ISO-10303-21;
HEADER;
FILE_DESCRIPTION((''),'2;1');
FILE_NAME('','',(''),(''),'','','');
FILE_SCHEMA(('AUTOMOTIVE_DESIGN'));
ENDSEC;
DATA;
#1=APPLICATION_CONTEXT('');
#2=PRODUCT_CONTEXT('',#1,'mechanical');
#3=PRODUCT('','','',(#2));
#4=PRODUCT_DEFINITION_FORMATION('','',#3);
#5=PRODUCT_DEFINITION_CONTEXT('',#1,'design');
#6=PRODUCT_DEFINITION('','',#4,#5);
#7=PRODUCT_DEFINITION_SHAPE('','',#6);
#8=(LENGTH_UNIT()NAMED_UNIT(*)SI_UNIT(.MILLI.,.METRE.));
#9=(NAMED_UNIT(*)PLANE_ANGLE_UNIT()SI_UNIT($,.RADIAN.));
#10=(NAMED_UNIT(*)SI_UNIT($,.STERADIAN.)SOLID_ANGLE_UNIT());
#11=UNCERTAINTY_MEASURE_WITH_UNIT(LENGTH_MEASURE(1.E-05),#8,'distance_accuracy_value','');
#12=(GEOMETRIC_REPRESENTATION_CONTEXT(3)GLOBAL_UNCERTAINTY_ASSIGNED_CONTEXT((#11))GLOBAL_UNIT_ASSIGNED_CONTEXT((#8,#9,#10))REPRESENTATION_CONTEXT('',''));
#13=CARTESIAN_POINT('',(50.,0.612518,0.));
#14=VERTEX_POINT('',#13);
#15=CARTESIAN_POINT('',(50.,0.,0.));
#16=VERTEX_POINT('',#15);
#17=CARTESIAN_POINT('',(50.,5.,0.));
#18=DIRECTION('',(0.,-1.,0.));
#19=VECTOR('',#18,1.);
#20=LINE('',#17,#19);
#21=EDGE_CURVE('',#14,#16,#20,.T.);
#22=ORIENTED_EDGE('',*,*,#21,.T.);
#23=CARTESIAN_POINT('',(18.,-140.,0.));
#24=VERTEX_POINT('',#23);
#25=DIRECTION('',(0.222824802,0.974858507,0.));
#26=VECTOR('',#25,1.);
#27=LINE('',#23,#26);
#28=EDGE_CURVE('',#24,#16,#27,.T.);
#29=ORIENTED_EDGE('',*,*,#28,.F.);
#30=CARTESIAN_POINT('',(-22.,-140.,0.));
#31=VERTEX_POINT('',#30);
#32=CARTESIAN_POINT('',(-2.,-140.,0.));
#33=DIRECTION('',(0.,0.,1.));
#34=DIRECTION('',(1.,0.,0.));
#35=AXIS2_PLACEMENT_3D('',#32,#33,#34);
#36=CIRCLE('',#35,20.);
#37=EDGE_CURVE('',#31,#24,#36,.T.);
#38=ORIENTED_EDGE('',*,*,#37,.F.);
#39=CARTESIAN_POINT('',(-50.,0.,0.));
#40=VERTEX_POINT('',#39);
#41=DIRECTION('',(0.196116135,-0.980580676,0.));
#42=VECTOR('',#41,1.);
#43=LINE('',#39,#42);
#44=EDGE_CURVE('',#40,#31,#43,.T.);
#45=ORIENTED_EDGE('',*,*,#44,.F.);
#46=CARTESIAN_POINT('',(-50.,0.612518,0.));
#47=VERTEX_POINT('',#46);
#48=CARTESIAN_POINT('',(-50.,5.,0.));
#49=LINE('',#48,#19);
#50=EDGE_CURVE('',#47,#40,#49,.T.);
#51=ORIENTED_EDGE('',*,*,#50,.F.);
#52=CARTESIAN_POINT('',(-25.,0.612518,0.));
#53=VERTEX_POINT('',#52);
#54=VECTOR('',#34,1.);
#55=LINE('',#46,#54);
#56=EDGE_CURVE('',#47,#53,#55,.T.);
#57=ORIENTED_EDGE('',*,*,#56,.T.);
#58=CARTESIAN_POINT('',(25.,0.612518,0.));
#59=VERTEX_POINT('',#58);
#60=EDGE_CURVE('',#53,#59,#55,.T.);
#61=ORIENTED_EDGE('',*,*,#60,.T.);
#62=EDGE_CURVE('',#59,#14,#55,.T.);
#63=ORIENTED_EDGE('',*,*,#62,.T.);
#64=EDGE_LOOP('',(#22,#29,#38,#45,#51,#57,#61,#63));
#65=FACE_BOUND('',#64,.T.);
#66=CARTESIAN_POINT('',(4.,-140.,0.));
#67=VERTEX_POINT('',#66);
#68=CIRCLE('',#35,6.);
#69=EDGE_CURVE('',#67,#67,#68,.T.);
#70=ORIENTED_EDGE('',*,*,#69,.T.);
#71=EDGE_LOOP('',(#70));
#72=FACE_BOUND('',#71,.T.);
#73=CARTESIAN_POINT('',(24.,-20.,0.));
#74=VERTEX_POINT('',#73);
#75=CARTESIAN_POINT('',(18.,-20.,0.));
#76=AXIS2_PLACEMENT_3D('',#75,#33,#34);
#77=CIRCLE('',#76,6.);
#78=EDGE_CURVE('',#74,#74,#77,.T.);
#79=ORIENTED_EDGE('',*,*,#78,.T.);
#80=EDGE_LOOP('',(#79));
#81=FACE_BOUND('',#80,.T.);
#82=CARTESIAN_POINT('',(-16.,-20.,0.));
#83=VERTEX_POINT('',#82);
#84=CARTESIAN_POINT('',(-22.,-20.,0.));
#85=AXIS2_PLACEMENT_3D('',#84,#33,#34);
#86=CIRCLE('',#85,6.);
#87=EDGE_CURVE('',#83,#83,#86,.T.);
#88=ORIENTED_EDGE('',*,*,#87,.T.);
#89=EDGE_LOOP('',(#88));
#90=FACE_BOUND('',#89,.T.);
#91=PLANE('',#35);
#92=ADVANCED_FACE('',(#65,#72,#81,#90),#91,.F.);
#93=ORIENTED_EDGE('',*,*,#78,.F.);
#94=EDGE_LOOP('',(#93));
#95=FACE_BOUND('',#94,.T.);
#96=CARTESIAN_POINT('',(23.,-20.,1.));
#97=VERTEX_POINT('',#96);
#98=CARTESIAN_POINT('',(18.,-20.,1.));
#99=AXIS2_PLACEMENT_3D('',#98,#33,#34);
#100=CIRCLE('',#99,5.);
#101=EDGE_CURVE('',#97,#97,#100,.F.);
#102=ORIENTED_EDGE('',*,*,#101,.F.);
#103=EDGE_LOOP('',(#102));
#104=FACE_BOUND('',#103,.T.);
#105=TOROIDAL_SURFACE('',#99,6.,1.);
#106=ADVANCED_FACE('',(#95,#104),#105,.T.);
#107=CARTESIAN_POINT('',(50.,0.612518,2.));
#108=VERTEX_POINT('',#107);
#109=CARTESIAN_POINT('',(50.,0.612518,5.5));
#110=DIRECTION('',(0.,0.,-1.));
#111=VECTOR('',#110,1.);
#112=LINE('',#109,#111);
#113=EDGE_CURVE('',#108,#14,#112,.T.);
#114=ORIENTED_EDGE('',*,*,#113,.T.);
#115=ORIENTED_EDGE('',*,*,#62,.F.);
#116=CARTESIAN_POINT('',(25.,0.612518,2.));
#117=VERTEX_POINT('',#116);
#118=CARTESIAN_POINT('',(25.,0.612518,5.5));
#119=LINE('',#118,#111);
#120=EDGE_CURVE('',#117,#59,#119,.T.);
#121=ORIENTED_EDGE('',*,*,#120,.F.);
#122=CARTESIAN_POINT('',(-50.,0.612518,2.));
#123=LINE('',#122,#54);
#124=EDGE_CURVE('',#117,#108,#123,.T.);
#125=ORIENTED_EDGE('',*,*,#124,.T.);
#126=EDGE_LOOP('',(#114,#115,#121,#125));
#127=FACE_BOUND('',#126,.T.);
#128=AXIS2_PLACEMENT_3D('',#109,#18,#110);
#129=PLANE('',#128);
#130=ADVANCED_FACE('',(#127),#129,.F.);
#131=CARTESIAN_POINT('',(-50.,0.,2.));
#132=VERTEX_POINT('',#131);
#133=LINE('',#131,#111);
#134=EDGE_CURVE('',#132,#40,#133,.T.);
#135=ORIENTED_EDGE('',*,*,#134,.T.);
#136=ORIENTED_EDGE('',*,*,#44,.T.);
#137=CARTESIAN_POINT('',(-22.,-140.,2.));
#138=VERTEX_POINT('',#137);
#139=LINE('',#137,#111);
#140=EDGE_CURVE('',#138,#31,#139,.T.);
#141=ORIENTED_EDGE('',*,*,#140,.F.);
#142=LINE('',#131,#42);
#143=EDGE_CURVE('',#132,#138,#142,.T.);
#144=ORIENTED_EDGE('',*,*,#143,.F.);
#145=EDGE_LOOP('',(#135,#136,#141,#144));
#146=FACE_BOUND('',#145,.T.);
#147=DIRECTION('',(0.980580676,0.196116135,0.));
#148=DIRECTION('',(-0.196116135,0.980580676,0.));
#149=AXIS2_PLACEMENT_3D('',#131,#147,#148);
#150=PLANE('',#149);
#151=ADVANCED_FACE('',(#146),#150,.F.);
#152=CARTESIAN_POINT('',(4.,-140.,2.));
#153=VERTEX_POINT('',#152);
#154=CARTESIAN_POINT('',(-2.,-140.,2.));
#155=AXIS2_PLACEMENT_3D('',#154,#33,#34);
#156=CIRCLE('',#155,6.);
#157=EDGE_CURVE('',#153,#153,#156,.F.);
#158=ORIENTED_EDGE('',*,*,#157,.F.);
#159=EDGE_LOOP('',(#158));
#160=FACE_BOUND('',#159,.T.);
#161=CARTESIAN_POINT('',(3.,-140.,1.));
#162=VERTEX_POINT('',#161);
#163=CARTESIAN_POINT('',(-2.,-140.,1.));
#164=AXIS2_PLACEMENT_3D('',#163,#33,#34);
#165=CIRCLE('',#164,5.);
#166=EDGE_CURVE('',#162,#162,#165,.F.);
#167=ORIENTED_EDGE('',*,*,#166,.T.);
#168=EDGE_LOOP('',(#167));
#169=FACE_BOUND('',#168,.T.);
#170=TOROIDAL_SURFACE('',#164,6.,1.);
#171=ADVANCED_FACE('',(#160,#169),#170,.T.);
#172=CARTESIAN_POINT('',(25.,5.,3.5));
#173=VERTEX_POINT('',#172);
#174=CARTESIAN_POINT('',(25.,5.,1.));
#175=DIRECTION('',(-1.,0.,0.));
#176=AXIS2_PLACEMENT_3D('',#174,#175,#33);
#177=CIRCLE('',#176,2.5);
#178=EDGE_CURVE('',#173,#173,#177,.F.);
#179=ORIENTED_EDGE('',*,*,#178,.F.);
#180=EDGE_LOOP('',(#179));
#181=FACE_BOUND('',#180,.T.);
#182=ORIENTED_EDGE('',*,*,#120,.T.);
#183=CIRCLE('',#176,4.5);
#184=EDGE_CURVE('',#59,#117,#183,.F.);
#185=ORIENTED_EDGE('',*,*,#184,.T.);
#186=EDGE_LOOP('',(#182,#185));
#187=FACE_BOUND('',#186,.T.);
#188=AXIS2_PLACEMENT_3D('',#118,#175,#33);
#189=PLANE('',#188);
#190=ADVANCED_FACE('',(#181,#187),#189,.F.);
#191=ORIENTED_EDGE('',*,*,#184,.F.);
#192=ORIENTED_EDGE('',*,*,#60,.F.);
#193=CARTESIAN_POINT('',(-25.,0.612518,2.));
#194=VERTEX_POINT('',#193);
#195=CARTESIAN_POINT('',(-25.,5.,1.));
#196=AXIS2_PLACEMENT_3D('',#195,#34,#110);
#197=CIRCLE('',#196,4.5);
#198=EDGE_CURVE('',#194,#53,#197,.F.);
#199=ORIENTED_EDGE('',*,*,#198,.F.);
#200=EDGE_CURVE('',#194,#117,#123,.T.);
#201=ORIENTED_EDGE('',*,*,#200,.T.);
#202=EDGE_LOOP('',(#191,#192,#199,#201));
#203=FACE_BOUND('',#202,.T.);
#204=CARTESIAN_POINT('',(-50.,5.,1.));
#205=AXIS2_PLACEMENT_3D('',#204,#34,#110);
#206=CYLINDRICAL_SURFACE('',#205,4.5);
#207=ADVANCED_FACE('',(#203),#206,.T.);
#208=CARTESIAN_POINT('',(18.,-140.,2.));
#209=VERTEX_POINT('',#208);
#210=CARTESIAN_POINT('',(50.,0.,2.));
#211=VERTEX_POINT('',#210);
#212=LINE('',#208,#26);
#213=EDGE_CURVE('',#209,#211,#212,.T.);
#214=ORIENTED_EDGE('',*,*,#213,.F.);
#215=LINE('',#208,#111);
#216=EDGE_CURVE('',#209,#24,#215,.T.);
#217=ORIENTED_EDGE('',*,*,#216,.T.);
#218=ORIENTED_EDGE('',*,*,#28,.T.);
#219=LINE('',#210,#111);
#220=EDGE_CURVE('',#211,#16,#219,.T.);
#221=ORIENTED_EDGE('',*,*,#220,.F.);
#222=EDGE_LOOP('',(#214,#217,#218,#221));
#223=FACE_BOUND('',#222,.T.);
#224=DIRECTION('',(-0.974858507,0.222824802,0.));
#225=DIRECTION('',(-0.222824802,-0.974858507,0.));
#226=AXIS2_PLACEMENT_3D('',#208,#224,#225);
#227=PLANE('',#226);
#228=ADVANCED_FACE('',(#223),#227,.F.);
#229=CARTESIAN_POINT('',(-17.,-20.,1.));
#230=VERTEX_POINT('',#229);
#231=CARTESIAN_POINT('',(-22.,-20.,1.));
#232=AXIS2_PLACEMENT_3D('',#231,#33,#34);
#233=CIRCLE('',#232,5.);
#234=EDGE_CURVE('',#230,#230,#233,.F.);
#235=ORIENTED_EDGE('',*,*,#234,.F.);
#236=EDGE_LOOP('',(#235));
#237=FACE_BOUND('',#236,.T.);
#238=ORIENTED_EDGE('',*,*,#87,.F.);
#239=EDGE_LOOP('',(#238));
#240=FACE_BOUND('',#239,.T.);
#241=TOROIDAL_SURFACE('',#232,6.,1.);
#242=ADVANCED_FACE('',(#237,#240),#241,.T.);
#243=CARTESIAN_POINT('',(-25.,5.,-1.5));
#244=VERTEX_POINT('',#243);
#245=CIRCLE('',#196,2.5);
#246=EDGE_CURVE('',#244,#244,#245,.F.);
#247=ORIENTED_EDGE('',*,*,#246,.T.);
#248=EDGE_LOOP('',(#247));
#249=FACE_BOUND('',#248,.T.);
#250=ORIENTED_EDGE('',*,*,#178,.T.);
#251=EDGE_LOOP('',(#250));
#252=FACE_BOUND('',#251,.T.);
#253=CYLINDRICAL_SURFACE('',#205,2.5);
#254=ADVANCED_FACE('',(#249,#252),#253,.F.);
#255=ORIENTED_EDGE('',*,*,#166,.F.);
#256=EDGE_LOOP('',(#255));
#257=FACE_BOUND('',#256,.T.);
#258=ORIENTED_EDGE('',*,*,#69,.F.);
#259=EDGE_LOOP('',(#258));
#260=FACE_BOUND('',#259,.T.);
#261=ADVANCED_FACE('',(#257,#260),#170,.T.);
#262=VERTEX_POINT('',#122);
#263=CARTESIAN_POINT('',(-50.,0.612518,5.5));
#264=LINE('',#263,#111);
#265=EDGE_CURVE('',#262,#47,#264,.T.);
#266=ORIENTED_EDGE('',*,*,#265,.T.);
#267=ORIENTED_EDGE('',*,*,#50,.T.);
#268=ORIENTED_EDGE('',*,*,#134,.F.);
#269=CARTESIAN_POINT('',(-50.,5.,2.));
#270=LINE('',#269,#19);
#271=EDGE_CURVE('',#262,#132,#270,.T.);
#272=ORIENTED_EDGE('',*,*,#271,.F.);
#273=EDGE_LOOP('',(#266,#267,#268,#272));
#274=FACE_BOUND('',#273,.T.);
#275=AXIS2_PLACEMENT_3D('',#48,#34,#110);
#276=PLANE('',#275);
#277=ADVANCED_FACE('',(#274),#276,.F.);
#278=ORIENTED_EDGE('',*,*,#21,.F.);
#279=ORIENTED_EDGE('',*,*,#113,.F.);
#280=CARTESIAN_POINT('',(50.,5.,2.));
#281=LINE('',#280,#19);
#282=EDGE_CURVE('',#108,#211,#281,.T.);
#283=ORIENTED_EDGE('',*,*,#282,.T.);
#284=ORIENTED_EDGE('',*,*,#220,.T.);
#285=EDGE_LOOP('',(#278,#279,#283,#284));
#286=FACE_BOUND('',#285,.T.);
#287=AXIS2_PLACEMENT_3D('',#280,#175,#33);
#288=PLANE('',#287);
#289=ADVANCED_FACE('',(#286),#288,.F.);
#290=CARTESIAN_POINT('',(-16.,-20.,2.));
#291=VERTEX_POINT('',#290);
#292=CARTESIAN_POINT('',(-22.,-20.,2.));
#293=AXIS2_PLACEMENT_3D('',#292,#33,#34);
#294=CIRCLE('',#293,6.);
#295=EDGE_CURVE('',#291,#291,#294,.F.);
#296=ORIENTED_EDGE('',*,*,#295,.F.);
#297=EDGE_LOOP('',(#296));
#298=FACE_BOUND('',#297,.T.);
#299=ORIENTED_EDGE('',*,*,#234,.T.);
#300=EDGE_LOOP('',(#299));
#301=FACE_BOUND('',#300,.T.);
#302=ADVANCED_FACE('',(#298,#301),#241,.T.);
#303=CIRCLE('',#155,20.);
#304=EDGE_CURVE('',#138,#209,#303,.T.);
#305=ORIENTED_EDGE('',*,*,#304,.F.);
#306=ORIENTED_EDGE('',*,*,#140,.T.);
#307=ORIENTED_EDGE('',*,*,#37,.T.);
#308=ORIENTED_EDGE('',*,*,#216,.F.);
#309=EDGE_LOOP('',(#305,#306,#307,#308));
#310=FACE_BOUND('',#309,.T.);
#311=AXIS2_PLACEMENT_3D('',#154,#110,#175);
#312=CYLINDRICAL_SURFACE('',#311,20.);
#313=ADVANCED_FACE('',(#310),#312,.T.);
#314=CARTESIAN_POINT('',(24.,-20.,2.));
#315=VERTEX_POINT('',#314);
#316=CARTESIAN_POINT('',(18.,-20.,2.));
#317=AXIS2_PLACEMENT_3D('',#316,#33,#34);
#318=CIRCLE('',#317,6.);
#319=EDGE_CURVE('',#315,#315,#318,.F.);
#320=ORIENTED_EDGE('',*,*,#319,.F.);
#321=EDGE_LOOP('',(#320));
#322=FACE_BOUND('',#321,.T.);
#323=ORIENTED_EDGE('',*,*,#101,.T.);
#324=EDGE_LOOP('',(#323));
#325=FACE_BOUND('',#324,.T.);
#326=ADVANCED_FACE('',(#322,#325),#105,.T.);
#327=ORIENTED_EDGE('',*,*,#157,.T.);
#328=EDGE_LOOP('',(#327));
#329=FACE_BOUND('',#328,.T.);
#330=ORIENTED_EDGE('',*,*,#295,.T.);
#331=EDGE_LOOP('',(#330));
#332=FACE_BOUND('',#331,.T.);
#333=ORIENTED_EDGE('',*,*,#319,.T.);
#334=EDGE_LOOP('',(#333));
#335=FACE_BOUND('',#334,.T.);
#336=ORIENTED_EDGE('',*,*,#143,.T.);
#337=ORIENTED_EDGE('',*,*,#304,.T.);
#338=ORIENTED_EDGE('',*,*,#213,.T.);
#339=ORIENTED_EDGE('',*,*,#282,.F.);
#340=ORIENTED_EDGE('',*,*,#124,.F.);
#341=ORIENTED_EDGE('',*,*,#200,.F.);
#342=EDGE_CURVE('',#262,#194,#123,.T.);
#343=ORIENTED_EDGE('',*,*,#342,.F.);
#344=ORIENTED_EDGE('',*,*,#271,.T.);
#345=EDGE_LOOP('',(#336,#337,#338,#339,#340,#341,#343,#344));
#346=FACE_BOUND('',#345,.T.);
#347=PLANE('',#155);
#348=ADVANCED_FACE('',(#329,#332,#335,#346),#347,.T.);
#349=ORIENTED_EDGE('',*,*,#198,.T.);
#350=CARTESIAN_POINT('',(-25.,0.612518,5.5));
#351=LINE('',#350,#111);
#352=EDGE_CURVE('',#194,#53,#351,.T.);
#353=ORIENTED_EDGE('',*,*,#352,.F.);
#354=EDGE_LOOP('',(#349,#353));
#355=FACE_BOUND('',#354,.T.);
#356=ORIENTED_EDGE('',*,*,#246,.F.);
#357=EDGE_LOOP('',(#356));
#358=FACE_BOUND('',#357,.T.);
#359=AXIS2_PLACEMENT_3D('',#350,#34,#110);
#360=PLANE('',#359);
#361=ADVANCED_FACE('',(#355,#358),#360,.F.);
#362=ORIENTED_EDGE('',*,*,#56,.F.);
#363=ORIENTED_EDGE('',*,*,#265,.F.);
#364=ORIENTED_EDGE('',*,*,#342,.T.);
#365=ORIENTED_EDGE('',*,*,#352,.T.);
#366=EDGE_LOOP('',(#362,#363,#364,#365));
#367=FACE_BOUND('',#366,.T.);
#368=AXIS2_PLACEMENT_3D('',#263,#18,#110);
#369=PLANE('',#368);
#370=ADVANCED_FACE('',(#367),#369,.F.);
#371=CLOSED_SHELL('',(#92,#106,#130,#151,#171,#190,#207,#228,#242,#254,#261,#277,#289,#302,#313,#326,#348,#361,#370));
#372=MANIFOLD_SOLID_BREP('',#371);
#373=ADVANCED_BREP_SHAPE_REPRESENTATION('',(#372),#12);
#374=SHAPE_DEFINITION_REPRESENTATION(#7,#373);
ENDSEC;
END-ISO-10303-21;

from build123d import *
from build123d.topology import SkipClean

# Parameters (mm, degrees)
ESBO_O1_R                  = 5
RESSALTO_EXTRUS_O1_DEPTH   = 2
FILETE1_R                  = 1
ESBO_O6_W                  = 100
ESBO_O6_H                  = 2
RESSALTO_EXTRUS_O2_DEPTH   = 5
RESSALTO_EXTRUS_O3_DEPTH   = 100
CORTE_EXTRUS_O1_DEPTH      = 189.759767959
CORTE_EXTRUS_O3_DEPTH      = 168.720750058
CORTE_EXTRUS_O3_DEPTH_BACK = 168.720750058
ESBO_O9_W                  = 25
ESBO_O9_H                  = 25


with BuildPart() as part:
    # Esboço1 → Ressalto-extrusão1 (new body)
    with BuildSketch(Plane.XY):
        with BuildLine():
            Line((-50, 0), (50, 0))
            Line((50, 0), (18, -140))
            ThreePointArc((18, -140), (-2, -160), (-22, -140))
            Line((-22, -140), (-50, 0))
        make_face()
        with Locations((-2, -140)):
            Circle(ESBO_O1_R, mode=Mode.SUBTRACT)
        with Locations((-22, -20)):
            Circle(ESBO_O1_R, mode=Mode.SUBTRACT)
        with Locations((18, -20)):
            Circle(ESBO_O1_R, mode=Mode.SUBTRACT)
    extrude(amount=RESSALTO_EXTRUS_O1_DEPTH)

    # Filete1
    filete1_edges = [part.edges().sort_by_distance(p)[0] for p in [
        (-27, -20, 0),
        (-27, -20, 2),
        (13, -20, 0),
        (13, -20, 2),
        (-7, -140, 0),
        (-7, -140, 2),
    ]]
    fillet(filete1_edges, radius=FILETE1_R - 0.0001)  # a hair under: the kernel refuses the full size

    # Esboço6 → Ressalto-extrusão2 (add)
    with BuildSketch(Plane(origin=(0, 0, 0), x_dir=(1, 0, 0), z_dir=(0, 1, 0))):
        with Locations((0, -1)):
            Rectangle(ESBO_O6_W, ESBO_O6_H)
    extrude(amount=RESSALTO_EXTRUS_O2_DEPTH)

    # Esboço7 → Ressalto-extrusão3 (add, through all)
    with BuildSketch(Plane(origin=(50, 0, 0), x_dir=(0, 0, -1), z_dir=(1, 0, 0))):
        with BuildLine():
            ThreePointArc((3.5, 5), (-3.80624304, 8.51781182), (-2, 0.612517806))
            Line((-2, 0.612517806), (-2, 2.708712153))
            ThreePointArc((-2, 2.708712153), (-2.369306394, 7.091650066), (1.5, 5))
            ThreePointArc((1.5, 5), (1.091650066, 3.630693606), (0, 2.708712153))
            Line((0, 2.708712153), (0, 0.612517806))
            ThreePointArc((0, 0.612517806), (2.51781182, 2.19375696), (3.5, 5))
        make_face()
        with BuildLine():
            Line((-2, 2.708712153), (-2, 0.612517806))
            ThreePointArc((-2, 0.612517806), (-1, 0.5), (0, 0.612517806))
            Line((0, 0.612517806), (0, 2.708712153))
            ThreePointArc((0, 2.708712153), (-1, 2.5), (-2, 2.708712153))
        make_face()
    extrude(amount=-RESSALTO_EXTRUS_O3_DEPTH)

    # Esboço8 → Corte-extrusão1 (cut, through all)
    with SkipClean():  # the faces are left unmerged after this step: merging them gives an invalid solid
        with BuildSketch(Plane(origin=(50, 0, 0), x_dir=(0, 0, -1), z_dir=(1, 0, 0))):
            with BuildLine():
                ThreePointArc((-2, 2.708712153), (-1, 7.5), (0, 2.708712153))
                Line((0, 2.708712153), (0, 5))
                Line((0, 5), (-2, 5))
                Line((-2, 5), (-2, 2.708712153))
            make_face()
            with BuildLine():
                Line((0, 5), (0, 2.708712153))
                ThreePointArc((0, 2.708712153), (1.091650066, 3.630693606), (1.5, 5))
                ThreePointArc((1.5, 5), (-2.369306394, 7.091650066), (-2, 2.708712153))
                Line((-2, 2.708712153), (-2, 5))
                Line((-2, 5), (0, 5))
            make_face()
            with BuildLine():
                ThreePointArc((-2, 2.708712153), (-1, 2.5), (0, 2.708712153))
                Line((0, 2.708712153), (0, 5))
                Line((0, 5), (-2, 5))
                Line((-2, 5), (-2, 2.708712153))
            make_face()
        extrude(amount=-CORTE_EXTRUS_O1_DEPTH, mode=Mode.SUBTRACT)

    # Esboço9 → Corte-extrusão3 (cut, two sides: drawn at the far end of the back side and taken through both)
    with BuildSketch(Plane(origin=(0, 0, 0), x_dir=(-1, 0, 0), z_dir=(0, 0, -1)).offset(-CORTE_EXTRUS_O3_DEPTH_BACK)):
        with Locations((-37.5, 13.112517806)):
            Rectangle(ESBO_O9_W, ESBO_O9_H)
        with Locations((37.5, 13.112517806)):
            Rectangle(ESBO_O9_W, ESBO_O9_H)
    extrude(amount=CORTE_EXTRUS_O3_DEPTH + CORTE_EXTRUS_O3_DEPTH_BACK, mode=Mode.SUBTRACT)


solid = part.part
